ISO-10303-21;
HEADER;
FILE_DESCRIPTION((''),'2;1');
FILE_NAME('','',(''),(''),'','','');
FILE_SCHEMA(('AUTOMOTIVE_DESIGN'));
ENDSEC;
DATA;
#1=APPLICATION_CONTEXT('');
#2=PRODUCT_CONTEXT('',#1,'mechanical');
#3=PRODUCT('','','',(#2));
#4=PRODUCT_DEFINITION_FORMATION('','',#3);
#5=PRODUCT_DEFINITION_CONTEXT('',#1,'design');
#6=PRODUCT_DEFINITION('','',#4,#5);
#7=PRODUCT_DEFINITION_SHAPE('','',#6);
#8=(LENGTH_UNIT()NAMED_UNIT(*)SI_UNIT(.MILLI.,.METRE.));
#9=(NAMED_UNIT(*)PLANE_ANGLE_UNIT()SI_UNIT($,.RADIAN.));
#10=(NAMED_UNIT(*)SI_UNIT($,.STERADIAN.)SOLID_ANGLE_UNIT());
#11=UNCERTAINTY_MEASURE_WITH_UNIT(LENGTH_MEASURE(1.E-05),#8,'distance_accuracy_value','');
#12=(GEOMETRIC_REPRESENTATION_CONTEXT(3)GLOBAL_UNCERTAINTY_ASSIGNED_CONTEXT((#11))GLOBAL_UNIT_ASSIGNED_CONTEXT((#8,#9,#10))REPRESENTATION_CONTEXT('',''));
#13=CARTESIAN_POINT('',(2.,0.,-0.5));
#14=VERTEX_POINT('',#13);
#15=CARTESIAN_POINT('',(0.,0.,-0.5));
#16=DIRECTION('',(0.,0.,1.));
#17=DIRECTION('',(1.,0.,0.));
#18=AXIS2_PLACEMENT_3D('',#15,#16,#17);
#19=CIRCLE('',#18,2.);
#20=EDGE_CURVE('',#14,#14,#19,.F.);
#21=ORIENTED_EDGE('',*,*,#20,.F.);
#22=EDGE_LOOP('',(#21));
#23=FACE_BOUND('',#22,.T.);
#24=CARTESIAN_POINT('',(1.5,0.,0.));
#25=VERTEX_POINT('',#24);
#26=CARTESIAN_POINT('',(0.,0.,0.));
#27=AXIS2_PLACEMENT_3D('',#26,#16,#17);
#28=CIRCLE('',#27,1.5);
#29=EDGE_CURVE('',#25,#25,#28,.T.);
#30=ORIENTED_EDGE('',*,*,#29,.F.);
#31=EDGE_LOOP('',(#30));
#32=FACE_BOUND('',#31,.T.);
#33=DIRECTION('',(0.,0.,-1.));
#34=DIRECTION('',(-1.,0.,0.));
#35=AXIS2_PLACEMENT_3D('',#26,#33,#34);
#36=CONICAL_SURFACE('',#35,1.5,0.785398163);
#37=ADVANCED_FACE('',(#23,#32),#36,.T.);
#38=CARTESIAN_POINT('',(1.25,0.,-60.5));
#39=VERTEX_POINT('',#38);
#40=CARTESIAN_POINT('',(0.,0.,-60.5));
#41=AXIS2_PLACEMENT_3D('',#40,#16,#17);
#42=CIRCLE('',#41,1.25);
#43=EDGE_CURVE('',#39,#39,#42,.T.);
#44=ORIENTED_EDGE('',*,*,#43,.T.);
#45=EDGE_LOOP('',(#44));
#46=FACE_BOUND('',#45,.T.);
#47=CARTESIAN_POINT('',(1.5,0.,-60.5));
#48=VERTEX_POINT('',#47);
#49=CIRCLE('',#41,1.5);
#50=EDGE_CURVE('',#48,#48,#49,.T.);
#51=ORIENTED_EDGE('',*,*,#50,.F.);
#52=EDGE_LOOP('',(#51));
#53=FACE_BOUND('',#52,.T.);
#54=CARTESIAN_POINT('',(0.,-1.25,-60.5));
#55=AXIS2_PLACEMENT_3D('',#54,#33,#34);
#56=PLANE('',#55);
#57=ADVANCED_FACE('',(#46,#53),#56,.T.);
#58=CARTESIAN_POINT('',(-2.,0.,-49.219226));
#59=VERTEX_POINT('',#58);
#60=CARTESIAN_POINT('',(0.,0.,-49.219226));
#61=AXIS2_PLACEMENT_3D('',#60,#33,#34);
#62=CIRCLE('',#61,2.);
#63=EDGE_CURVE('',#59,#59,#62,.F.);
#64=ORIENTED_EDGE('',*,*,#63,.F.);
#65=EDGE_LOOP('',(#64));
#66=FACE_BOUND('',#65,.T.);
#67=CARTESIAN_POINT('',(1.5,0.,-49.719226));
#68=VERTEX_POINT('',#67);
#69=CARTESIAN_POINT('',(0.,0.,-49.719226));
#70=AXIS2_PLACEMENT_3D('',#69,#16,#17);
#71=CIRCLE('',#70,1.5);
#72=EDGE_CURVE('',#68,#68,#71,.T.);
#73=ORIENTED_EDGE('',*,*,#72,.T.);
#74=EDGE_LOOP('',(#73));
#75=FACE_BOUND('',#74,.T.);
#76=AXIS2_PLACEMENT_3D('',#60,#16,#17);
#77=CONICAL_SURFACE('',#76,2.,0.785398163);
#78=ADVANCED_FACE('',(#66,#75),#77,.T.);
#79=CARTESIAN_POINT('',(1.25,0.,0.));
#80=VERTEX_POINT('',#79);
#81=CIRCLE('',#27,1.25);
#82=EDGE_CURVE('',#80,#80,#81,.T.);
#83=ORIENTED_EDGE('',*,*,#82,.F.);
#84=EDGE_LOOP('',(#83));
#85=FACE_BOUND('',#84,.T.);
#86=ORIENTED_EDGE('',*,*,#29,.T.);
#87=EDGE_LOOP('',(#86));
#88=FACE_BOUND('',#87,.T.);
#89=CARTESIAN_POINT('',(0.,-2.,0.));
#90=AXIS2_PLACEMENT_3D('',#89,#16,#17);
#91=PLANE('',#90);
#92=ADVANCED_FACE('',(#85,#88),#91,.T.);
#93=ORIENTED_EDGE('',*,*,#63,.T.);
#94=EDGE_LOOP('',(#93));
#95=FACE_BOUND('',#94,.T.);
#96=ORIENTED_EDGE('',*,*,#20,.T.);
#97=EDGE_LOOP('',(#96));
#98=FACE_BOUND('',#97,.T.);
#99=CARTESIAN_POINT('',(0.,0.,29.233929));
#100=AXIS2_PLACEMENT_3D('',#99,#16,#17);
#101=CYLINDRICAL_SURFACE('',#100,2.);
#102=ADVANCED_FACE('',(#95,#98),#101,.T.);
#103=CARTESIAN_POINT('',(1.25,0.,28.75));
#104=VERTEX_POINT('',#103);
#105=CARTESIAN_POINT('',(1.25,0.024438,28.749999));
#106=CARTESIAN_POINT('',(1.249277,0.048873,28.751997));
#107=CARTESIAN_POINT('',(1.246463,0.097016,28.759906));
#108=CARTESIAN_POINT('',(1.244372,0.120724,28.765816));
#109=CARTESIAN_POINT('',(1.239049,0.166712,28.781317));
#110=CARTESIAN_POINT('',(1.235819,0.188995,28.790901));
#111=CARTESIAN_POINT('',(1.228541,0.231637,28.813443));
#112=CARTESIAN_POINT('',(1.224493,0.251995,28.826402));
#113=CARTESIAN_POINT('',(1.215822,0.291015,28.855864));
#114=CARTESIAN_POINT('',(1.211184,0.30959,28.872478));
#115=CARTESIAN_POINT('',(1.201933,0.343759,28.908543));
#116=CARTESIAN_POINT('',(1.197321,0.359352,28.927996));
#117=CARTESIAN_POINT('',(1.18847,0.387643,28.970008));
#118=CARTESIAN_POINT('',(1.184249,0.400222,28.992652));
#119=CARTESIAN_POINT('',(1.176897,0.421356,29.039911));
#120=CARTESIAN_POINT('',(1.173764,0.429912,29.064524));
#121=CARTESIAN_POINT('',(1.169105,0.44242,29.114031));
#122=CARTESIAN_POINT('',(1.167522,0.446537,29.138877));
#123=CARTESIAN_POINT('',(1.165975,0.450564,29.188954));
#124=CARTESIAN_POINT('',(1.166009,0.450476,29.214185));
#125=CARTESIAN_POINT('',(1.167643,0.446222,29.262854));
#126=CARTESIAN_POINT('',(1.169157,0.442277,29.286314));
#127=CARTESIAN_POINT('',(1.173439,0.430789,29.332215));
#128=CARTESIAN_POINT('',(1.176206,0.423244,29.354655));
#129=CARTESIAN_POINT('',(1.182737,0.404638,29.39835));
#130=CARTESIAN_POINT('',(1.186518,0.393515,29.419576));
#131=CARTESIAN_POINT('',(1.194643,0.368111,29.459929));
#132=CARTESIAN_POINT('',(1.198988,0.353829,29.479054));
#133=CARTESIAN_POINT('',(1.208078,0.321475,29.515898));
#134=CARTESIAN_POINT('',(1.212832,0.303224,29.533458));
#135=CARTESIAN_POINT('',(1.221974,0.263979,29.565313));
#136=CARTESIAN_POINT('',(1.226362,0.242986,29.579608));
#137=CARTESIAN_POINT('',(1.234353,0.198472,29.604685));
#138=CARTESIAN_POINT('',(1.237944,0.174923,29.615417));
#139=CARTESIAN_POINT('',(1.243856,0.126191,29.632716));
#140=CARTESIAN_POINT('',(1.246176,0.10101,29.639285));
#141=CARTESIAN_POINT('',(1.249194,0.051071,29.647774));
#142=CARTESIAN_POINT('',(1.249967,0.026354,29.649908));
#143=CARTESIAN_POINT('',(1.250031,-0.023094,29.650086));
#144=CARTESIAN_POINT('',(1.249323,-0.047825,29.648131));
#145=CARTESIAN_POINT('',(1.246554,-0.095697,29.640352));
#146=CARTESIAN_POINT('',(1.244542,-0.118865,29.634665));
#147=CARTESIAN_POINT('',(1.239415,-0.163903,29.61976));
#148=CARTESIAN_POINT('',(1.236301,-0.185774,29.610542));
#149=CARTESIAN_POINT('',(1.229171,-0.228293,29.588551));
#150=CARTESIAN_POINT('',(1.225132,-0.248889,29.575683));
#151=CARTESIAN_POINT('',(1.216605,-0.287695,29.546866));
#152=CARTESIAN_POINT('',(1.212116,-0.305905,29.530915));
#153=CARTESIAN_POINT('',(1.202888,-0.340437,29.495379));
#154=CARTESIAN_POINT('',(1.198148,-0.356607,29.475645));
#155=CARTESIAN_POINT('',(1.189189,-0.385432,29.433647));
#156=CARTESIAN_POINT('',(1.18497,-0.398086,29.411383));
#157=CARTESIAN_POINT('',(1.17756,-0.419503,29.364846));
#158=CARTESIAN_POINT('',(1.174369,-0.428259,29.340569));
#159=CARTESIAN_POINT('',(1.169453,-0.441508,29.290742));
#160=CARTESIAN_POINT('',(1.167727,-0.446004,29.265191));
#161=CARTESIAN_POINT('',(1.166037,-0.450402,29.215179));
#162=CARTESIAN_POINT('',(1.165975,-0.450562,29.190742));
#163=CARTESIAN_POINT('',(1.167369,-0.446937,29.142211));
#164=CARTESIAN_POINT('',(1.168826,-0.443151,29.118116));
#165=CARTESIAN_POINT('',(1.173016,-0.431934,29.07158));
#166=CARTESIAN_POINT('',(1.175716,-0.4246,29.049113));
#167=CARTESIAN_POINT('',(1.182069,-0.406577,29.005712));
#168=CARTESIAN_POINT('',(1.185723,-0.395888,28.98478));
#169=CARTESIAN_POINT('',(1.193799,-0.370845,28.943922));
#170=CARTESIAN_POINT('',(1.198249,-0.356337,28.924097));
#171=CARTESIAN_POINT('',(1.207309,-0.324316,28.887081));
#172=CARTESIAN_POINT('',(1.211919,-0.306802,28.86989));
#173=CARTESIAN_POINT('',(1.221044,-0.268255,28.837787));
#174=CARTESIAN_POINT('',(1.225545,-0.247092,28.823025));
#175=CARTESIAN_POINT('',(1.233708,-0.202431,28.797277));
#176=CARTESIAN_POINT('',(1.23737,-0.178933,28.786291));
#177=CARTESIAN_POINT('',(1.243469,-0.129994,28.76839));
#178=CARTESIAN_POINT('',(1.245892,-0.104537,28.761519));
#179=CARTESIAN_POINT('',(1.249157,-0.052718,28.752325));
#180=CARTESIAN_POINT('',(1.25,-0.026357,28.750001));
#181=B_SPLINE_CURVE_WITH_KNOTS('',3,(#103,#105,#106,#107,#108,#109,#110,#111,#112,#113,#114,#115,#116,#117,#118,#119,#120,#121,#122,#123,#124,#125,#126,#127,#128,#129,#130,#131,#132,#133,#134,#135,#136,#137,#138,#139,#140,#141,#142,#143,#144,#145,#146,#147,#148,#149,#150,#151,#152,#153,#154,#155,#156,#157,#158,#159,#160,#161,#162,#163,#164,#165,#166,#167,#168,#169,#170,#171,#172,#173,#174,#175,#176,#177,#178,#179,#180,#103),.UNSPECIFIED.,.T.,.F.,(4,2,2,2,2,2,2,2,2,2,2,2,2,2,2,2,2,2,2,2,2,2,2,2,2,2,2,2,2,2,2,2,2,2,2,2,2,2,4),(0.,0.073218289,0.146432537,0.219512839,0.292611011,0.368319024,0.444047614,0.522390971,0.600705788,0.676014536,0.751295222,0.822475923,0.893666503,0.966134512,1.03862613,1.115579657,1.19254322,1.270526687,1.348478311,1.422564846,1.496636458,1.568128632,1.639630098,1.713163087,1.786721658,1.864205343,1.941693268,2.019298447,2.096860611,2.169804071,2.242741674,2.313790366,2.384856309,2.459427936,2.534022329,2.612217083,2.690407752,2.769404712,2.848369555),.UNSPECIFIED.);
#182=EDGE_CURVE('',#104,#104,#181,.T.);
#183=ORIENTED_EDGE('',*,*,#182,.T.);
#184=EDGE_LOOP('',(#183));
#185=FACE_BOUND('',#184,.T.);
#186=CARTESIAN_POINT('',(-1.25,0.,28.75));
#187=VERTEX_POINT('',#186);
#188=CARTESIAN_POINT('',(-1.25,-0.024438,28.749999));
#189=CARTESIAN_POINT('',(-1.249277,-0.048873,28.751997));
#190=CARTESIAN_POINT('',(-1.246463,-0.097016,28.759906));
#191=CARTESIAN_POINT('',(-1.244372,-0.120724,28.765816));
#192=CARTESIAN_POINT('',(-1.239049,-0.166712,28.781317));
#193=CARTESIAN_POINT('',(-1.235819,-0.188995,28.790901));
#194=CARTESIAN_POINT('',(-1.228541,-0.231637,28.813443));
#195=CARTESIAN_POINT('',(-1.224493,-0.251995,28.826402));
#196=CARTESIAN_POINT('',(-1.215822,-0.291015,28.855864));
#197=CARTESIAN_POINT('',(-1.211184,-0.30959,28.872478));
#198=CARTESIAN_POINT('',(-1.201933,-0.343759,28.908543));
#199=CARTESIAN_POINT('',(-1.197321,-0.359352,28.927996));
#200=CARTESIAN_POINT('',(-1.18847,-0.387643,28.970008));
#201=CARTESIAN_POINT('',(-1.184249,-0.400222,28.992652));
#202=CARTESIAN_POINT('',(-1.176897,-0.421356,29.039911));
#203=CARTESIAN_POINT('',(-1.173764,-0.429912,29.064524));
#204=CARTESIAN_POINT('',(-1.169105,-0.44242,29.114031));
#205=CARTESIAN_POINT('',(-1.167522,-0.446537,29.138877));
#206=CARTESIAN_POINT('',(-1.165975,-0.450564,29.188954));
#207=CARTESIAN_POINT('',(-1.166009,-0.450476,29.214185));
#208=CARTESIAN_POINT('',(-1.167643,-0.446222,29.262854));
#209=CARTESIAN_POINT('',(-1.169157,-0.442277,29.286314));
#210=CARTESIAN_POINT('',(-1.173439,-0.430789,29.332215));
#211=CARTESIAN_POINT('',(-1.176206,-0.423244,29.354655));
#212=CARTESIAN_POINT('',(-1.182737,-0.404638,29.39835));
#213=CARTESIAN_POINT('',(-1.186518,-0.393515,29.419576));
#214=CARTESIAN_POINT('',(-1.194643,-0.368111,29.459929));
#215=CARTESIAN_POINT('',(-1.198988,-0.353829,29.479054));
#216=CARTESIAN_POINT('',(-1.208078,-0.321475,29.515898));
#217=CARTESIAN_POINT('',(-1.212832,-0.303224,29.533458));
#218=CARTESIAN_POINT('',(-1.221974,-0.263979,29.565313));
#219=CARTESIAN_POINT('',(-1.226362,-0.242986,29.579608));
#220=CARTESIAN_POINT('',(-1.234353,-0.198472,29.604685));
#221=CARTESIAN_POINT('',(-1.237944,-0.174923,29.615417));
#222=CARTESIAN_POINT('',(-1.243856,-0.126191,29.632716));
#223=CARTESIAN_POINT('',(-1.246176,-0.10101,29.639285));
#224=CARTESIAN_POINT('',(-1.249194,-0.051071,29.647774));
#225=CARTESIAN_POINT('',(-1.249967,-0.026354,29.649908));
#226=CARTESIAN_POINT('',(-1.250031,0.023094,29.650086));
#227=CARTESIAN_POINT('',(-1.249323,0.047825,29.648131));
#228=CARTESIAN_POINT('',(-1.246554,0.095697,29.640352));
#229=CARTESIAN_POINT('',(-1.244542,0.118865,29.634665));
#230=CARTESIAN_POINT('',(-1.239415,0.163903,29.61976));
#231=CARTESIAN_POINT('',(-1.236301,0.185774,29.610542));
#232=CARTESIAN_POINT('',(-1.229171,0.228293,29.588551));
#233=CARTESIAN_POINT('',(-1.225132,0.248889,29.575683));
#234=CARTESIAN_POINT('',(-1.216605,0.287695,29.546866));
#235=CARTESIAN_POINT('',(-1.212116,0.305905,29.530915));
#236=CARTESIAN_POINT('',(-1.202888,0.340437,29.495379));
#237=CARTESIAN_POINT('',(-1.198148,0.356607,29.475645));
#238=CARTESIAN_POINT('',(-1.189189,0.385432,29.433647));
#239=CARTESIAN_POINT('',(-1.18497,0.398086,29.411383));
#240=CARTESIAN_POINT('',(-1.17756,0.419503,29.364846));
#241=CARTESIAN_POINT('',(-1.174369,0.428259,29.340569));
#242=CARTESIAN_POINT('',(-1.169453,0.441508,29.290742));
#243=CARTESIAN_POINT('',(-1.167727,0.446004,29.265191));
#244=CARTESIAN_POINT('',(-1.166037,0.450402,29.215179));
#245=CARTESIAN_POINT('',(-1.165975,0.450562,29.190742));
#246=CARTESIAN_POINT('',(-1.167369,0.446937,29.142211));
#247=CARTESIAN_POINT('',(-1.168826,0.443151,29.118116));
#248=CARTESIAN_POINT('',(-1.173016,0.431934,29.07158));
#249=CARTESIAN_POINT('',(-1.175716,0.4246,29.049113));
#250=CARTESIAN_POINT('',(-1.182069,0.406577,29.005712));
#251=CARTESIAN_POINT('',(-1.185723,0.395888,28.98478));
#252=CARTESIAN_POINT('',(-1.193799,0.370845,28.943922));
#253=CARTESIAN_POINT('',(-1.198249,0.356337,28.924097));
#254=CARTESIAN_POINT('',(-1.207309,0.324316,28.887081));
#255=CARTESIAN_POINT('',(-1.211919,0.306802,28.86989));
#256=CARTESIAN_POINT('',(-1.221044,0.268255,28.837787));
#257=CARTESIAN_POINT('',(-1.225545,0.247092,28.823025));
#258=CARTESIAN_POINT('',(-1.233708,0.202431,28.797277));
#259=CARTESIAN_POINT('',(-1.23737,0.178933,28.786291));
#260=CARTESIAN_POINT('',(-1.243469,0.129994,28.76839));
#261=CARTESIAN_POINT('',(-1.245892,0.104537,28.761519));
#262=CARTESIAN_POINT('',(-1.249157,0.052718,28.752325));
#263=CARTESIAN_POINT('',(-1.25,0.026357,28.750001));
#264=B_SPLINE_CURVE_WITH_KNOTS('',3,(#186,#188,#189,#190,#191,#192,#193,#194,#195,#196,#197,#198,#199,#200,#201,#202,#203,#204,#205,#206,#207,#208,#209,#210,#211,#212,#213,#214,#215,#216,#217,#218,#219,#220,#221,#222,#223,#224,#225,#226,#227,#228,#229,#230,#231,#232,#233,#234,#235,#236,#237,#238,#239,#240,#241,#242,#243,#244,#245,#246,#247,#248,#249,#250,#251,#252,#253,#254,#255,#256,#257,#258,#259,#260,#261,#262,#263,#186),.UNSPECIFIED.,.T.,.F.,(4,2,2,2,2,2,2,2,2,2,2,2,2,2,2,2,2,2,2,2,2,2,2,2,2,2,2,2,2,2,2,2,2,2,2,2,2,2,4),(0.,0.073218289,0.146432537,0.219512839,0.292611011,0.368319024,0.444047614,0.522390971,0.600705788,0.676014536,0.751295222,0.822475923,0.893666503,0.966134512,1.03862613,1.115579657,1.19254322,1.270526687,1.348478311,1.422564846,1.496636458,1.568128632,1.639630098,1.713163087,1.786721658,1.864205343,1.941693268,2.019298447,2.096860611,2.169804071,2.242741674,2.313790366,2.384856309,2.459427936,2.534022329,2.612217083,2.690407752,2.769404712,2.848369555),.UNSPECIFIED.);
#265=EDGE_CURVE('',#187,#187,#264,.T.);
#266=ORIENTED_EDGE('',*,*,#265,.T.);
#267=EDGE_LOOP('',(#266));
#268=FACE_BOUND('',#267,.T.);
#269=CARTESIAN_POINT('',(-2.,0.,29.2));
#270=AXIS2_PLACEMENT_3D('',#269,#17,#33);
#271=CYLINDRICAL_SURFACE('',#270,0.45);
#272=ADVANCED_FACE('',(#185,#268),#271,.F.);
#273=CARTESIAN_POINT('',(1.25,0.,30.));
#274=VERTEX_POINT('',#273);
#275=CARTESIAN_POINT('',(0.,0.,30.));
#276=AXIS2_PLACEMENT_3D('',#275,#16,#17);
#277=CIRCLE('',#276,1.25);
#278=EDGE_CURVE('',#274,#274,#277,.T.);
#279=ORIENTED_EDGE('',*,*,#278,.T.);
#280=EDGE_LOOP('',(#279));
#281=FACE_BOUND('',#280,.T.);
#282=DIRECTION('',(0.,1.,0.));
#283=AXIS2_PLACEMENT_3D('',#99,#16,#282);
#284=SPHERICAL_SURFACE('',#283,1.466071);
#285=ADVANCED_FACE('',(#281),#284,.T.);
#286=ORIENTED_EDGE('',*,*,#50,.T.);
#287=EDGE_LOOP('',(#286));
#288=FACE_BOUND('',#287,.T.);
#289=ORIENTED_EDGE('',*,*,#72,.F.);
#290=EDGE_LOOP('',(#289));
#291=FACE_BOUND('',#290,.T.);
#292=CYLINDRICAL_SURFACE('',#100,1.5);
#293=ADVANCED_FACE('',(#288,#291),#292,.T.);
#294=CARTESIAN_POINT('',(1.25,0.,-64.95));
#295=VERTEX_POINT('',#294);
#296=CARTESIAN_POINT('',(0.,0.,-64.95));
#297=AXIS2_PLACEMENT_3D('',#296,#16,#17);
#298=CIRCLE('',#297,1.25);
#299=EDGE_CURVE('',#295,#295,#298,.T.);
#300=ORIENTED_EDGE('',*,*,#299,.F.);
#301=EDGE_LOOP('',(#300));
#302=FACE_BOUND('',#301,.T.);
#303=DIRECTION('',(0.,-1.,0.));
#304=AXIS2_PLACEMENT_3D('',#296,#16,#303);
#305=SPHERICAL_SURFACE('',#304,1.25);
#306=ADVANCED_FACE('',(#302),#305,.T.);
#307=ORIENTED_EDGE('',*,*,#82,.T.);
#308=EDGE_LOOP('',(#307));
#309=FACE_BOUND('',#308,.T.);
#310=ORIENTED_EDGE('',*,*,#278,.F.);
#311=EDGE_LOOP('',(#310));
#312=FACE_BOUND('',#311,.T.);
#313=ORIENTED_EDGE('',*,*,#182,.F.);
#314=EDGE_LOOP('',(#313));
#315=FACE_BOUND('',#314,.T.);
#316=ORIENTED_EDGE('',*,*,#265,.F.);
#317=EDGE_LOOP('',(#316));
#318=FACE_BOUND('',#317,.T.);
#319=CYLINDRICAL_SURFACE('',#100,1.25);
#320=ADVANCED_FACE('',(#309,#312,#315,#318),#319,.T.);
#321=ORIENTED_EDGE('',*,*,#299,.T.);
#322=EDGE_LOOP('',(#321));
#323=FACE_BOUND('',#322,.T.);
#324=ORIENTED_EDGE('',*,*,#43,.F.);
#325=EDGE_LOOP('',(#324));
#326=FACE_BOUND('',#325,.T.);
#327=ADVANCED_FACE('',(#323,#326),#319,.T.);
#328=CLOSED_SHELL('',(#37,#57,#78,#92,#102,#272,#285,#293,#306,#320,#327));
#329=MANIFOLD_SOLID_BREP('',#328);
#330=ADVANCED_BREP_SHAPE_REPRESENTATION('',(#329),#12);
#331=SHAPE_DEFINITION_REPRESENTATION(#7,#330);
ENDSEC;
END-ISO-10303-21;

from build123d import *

# Parameters (mm, degrees)
CHAMFER1_SIZE           = 0.5
CUT_EXTRUDE1_DEPTH      = 67.260395411
CUT_EXTRUDE1_DEPTH_BACK = 67.260395411
SKETCH3_R               = 0.45


with BuildPart() as part:
    # Sketch2 → Revolve1 (revolve)
    with BuildSketch(Plane(origin=(0, 0, 0), x_dir=(0, 0, -1), z_dir=(1, 0, 0)), mode=Mode.PRIVATE) as revolve1_sk:
        with BuildLine():
            Line((-29.233928571, 0), (65.5, 0))
            Line((65.5, 0), (66.2, 0))
            ThreePointArc((66.2, 0), (65.833883476, -0.883883476), (64.95, -1.25))
            Line((64.95, -1.25), (60.5, -1.25))
            Line((60.5, -1.25), (60.5, -1.5))
            Line((60.5, -1.5), (49.719225947, -1.5))
            Line((49.719225947, -1.5), (49.719225947, -2))
            Line((49.719225947, -2), (0, -2))
            Line((0, -2), (0, -1.25))
            Line((0, -1.25), (-5, -1.25))
            Line((-5, -1.25), (-30, -1.25))
            ThreePointArc((-30, -1.25), (-30.513084713, -0.716327439), (-30.7, 0))
            Line((-30.7, 0), (-29.233928571, 0))
        make_face()
    revolve(revolve1_sk.sketch.rotate(Axis((0, 0, 29.233928571), (0, 0, -1)), 270), axis=Axis((0, 0, 29.233928571), (0, 0, -1)))

    # Chamfer1
    chamfer1_edges = [part.edges().sort_by_distance(p)[0] for p in [
        (-2, 0, -49.719225947),
        (-2, 0, 0),
    ]]
    chamfer(chamfer1_edges, length=CHAMFER1_SIZE - 0.0001)  # a hair under: the kernel refuses the full size

    # Sketch3 → Cut-Extrude1 (cut, two sides: drawn at the far end of the back side and taken through both)
    with BuildSketch(Plane(origin=(0, 0, 0), x_dir=(0, 0, -1), z_dir=(1, 0, 0)).offset(-CUT_EXTRUDE1_DEPTH_BACK)):
        with Locations((-29.2, 0)):
            Circle(SKETCH3_R)
    extrude(amount=CUT_EXTRUDE1_DEPTH + CUT_EXTRUDE1_DEPTH_BACK, mode=Mode.SUBTRACT)


solid = part.part
